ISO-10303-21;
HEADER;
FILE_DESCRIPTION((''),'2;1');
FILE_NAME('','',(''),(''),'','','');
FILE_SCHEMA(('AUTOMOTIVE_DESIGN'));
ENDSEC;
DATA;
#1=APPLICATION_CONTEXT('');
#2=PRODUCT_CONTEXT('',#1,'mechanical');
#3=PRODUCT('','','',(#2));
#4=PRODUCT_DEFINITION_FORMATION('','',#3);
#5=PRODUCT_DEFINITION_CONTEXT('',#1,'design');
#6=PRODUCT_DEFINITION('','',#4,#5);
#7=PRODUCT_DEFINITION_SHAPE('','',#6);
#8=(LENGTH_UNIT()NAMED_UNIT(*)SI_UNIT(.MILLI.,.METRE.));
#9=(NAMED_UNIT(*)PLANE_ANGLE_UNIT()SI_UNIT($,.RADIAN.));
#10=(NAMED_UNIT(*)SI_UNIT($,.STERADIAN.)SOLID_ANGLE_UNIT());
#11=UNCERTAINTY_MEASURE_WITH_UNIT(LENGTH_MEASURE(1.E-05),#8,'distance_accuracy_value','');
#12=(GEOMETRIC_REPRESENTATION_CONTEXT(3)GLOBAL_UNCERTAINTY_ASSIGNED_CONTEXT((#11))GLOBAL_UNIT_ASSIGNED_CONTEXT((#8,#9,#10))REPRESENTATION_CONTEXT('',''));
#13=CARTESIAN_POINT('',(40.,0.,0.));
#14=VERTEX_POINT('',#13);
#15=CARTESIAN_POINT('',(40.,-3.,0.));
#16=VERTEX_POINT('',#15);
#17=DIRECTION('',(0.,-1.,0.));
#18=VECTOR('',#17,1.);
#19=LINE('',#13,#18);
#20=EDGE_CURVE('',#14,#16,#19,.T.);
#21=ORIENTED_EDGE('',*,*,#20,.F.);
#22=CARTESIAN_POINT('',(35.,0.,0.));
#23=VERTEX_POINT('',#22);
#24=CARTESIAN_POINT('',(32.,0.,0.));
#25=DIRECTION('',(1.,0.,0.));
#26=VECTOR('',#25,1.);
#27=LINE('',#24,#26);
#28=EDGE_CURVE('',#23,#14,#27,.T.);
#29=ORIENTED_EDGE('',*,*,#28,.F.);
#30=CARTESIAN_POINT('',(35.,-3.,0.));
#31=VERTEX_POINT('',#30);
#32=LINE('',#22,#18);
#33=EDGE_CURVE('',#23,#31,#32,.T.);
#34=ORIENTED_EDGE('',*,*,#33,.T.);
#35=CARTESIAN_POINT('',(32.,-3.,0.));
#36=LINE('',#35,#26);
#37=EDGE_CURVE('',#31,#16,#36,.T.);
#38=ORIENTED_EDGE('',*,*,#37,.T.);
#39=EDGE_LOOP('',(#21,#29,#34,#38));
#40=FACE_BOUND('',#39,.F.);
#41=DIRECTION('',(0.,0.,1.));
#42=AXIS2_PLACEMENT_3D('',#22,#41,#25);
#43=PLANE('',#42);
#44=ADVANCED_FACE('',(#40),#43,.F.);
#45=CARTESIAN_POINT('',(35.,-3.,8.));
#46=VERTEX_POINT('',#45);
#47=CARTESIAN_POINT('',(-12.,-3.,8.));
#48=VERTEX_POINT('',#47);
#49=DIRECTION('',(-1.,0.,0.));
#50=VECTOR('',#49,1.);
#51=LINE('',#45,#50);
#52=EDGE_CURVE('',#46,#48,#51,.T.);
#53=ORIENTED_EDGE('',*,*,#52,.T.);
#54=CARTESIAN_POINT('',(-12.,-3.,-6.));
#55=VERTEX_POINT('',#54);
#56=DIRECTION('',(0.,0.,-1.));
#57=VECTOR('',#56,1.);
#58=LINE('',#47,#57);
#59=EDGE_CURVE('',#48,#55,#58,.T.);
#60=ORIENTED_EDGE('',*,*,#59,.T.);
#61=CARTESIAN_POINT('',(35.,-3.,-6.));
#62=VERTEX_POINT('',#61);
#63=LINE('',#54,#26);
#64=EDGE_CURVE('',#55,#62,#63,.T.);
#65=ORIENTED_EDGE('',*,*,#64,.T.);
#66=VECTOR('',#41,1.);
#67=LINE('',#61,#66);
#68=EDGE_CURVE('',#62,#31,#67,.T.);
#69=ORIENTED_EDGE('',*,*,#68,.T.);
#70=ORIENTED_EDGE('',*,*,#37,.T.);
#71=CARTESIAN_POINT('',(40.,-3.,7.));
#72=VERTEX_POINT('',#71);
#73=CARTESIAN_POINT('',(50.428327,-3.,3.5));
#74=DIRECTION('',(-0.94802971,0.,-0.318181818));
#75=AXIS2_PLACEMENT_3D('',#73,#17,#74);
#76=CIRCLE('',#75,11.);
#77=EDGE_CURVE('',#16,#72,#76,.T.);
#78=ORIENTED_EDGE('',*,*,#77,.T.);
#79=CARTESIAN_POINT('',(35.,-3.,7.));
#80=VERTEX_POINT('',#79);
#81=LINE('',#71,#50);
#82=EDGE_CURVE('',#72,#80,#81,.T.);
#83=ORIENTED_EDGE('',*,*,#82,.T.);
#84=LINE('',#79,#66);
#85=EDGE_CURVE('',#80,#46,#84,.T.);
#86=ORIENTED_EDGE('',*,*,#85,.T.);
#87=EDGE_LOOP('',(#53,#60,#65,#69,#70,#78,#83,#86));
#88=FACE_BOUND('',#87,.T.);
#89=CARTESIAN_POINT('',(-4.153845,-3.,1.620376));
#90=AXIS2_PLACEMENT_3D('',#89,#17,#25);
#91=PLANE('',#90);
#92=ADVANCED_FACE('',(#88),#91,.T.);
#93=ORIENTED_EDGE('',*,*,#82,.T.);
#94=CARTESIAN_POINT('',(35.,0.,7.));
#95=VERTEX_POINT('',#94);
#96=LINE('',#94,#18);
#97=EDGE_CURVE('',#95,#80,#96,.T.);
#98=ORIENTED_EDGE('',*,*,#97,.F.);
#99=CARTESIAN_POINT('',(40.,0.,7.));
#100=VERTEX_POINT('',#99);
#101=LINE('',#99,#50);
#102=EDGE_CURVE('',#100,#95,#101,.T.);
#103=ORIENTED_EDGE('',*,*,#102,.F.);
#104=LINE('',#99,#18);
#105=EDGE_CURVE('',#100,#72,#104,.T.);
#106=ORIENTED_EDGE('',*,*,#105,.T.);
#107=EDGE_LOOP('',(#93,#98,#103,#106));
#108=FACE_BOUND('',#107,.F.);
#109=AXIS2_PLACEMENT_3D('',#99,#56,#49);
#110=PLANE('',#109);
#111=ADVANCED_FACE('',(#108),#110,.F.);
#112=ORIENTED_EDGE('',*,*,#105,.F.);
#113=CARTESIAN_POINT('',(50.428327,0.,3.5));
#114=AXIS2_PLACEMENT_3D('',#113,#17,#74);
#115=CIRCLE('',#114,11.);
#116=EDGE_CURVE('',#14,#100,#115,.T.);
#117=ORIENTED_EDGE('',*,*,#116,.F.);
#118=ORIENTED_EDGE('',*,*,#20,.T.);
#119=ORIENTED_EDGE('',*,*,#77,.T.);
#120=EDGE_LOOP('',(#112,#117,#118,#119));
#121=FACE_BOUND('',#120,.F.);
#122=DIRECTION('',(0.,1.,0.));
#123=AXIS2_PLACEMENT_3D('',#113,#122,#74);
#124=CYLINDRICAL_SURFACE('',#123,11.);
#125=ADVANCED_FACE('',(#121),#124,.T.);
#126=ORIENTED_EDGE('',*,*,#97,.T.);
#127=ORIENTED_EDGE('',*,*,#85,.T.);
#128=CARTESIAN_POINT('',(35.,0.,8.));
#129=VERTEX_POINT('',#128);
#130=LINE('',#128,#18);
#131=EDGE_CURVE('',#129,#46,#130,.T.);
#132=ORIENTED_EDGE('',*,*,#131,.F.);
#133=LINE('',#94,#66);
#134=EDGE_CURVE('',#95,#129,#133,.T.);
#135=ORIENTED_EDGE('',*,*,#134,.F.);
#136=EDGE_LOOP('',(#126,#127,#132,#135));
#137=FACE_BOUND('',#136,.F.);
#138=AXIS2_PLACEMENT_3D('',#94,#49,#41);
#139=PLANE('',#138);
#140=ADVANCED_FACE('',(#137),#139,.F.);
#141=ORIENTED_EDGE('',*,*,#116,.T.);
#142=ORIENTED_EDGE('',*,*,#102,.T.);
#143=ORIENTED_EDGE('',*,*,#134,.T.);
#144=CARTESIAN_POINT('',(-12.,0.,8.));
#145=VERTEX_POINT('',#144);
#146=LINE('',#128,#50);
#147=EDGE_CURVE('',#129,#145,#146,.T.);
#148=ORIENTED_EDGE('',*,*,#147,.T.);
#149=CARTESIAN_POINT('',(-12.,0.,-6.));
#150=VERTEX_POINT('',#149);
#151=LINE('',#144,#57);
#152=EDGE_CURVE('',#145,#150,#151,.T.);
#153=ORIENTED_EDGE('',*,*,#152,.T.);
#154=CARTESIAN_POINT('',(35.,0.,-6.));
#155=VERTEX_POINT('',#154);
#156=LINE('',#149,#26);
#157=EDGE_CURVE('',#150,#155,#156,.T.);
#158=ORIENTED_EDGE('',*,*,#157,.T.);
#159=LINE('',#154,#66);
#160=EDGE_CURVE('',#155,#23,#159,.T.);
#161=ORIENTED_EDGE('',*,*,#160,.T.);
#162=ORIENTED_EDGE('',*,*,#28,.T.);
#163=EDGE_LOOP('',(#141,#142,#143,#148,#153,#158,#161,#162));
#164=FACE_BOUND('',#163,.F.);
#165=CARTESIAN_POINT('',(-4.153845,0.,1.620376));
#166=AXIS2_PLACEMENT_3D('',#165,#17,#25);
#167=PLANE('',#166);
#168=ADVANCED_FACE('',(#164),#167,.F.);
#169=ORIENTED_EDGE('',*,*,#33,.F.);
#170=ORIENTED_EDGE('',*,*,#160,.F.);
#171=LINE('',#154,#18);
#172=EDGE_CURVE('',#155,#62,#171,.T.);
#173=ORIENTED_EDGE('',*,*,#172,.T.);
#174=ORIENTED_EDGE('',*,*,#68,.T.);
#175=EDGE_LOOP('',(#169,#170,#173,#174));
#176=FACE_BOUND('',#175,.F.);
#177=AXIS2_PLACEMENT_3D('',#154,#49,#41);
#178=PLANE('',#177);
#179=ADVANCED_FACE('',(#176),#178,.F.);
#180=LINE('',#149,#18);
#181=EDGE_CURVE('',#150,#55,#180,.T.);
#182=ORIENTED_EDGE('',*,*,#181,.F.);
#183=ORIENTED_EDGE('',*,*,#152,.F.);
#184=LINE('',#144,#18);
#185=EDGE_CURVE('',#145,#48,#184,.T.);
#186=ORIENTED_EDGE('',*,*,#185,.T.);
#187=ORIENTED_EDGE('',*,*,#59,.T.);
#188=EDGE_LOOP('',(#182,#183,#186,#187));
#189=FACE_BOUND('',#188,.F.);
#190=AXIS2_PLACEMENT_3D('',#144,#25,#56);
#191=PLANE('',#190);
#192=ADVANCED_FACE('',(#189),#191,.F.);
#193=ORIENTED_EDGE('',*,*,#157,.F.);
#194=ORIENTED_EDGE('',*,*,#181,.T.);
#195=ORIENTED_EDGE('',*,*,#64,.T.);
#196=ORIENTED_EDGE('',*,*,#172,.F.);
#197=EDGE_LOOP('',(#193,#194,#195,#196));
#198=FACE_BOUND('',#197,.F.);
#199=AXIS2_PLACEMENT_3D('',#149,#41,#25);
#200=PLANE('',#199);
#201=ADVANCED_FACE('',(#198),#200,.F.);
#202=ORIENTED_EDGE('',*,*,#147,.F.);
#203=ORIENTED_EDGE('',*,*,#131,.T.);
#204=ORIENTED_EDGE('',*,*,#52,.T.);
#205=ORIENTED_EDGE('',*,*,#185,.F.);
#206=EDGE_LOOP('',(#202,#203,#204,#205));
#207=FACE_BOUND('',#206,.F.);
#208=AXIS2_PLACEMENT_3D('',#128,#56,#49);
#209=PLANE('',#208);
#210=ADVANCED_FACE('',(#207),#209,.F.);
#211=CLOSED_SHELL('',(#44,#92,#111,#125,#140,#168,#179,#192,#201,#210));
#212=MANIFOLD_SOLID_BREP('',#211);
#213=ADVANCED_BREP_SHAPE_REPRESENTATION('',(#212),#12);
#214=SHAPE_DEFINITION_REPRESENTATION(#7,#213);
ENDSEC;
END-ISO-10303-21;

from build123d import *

# Parameters (mm, degrees)
F0_W     = 5
F0_H     = 7
F0_R     = 3
F1_DEPTH = 3


# Not quite as in the source:
# - a feature names something its author has since deleted; it is built from what else it names


with BuildPart() as f1:
    # F0 (on Front) → F1 (new body)
    with BuildSketch(Plane.XZ):
        Polygon((1.3333333333, 0), (0, 0), (0, 7), (-10, 2.5), (-10, -2), (-2, -2), align=None)
        Polygon((0, 7), (0, 0), (1.3333333333, 0), (8, 4), (13, 4), (14.2307692308, 0), (32, 0), (35, 0), (35, 7), align=None)
        Polygon((32, 0), (14.2307692308, 0), (15, -2.5), (11.75, -3.5), (15, -5), align=None)
        with Locations((37.5, 3.5)):
            Rectangle(F0_W, F0_H)
        with BuildLine():
            ThreePointArc((40, 0), (61.4283268073, 3.5), (40, 7))
            Line((40, 7), (40, 0))
        make_face()
        with Locations((57.4283268073, 3.5)):
            Circle(F0_R, mode=Mode.SUBTRACT)
        Polygon((8, 4), (1.3333333333, 0), (14.2307692308, 0), (13, 4), align=None)
        Polygon((14.2307692308, 0), (1.3333333333, 0), (-2, -2), (-10, -2), (-10, 2.5), (0, 7), (35, 7), (35, 8), (-12, 8), (-12, -6), (35, -6), (35, 0), (32, 0), (15, -5), (11.75, -3.5), (15, -2.5), align=None)
        with Locations((57.4283268073, 3.5)):
            Circle(F0_R)
    extrude(amount=F1_DEPTH)


solid = f1.part
